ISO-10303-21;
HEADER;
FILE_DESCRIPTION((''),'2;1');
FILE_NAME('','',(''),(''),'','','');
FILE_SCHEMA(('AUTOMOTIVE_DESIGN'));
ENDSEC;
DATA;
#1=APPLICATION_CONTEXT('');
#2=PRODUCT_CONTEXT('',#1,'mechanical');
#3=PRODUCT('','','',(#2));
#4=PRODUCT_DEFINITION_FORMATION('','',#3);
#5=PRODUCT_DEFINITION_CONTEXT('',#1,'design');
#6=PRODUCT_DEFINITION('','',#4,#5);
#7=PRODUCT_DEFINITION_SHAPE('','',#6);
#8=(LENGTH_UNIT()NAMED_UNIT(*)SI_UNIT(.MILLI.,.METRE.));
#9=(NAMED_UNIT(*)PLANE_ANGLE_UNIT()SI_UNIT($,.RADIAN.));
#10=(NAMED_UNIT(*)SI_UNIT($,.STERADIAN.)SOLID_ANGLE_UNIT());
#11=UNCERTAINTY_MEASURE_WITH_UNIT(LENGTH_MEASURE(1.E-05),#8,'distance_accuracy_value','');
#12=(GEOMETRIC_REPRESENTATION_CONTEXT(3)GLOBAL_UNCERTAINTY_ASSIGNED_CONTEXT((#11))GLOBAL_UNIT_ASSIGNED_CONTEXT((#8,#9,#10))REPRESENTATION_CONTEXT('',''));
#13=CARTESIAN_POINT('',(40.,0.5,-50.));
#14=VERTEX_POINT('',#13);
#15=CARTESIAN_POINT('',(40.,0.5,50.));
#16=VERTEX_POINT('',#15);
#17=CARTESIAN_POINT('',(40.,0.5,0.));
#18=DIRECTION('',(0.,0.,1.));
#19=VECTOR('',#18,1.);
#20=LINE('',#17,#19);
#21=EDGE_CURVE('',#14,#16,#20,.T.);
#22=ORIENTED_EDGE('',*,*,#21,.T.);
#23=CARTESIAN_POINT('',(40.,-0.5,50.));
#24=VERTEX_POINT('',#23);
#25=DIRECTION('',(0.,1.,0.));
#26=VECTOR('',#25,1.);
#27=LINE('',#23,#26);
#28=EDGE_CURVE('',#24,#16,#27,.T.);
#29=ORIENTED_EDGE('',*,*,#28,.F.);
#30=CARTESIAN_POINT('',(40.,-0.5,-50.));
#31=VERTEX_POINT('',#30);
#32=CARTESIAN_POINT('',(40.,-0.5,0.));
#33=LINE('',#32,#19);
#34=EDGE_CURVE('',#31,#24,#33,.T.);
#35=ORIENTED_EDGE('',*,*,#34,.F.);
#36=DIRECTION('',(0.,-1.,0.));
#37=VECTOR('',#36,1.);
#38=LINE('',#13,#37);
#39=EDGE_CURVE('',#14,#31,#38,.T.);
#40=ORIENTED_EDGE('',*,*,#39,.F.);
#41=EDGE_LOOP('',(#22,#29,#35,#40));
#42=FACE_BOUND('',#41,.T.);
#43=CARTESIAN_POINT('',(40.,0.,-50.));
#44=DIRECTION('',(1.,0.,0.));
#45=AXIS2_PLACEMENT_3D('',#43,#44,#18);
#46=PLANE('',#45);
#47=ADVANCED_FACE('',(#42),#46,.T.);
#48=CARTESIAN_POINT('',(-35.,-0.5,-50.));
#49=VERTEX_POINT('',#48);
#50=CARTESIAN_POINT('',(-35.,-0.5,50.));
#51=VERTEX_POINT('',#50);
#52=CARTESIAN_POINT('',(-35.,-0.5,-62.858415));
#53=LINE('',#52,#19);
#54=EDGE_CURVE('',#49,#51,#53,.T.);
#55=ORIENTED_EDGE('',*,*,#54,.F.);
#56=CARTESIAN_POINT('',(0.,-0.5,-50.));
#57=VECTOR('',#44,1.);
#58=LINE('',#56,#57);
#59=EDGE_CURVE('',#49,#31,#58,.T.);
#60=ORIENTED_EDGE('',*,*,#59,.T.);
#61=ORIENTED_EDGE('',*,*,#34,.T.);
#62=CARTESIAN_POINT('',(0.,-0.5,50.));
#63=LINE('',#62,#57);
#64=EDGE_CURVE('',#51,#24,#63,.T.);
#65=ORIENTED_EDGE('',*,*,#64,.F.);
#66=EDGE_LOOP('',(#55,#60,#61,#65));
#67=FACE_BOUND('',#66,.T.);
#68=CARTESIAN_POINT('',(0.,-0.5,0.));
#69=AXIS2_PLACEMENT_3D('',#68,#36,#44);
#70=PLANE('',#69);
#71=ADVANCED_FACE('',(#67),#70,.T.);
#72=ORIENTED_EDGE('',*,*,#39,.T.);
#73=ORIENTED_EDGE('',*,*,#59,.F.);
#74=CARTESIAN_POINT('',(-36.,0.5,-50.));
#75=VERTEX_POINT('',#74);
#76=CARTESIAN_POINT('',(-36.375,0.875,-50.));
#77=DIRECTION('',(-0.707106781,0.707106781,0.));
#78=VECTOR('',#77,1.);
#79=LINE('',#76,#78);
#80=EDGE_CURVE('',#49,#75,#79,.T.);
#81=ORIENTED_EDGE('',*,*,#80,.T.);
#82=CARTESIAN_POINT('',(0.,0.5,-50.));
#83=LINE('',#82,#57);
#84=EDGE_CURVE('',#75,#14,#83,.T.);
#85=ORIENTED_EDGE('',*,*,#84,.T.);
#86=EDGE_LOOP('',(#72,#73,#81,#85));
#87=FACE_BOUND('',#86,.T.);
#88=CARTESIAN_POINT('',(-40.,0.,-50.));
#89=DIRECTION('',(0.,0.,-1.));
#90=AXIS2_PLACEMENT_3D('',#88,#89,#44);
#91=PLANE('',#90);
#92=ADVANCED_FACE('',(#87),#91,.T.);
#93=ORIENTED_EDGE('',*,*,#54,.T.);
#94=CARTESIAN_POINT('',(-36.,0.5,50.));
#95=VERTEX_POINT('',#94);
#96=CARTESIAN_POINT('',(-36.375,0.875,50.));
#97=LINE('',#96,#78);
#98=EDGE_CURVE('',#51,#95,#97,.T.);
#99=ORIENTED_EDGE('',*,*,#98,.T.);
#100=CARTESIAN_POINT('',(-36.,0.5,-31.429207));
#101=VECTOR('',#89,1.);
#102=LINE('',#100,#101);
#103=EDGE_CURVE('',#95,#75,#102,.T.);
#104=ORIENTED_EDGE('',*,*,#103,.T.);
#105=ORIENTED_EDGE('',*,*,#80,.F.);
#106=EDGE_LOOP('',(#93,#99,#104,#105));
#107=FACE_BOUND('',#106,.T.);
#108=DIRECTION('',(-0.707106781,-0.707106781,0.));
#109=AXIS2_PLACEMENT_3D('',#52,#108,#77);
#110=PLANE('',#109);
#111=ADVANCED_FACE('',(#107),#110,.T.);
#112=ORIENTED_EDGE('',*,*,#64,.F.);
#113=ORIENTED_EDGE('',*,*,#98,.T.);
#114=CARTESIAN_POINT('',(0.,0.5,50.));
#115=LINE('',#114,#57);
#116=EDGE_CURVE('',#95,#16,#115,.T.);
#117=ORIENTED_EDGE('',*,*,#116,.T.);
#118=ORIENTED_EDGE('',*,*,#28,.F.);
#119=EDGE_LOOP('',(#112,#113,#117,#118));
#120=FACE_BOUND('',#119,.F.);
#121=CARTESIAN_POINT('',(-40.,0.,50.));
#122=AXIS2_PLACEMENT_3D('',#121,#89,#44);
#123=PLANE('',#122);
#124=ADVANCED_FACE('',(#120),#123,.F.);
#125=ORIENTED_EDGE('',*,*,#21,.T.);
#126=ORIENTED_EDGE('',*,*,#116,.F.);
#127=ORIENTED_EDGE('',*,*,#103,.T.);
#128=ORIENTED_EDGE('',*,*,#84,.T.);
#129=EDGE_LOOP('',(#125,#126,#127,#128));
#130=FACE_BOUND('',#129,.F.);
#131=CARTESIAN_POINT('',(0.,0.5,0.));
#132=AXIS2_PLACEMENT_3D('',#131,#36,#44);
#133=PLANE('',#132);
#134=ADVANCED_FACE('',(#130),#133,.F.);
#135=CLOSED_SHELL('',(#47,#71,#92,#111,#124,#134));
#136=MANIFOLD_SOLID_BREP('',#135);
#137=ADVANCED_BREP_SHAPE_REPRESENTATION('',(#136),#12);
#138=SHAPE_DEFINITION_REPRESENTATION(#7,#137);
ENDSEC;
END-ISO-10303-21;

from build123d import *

# Parameters (mm, degrees)
F0_W        = 80
F0_H        = 100
F1_DEPTH    = 0.5
F2_T1_DEPTH = 125.7168298797


# Not quite as in the source:
# - a fillet or chamfer that OpenCascade refuses, or shapes differently, is made with other operations: its cross-section is extruded or revolved along the edge and cut away or added


with BuildPart() as f1:
    # F0 (on Front) → F1 (new body, symmetric)
    with BuildSketch(Plane.XZ):
        Rectangle(F0_W, F0_H)
    extrude(amount=F1_DEPTH, both=True)

    # F2: chamfer of 5 on 1 edges, made by hand

    # F2_s2 → F2_t1 (cut)
    with BuildSketch(Plane.XY.offset(-62.8584149398)):
        Polygon((-35, -0.5), (-40, 4.5), (-40, -0.5), align=None)
    extrude(amount=F2_T1_DEPTH, mode=Mode.SUBTRACT)


solid = f1.part
